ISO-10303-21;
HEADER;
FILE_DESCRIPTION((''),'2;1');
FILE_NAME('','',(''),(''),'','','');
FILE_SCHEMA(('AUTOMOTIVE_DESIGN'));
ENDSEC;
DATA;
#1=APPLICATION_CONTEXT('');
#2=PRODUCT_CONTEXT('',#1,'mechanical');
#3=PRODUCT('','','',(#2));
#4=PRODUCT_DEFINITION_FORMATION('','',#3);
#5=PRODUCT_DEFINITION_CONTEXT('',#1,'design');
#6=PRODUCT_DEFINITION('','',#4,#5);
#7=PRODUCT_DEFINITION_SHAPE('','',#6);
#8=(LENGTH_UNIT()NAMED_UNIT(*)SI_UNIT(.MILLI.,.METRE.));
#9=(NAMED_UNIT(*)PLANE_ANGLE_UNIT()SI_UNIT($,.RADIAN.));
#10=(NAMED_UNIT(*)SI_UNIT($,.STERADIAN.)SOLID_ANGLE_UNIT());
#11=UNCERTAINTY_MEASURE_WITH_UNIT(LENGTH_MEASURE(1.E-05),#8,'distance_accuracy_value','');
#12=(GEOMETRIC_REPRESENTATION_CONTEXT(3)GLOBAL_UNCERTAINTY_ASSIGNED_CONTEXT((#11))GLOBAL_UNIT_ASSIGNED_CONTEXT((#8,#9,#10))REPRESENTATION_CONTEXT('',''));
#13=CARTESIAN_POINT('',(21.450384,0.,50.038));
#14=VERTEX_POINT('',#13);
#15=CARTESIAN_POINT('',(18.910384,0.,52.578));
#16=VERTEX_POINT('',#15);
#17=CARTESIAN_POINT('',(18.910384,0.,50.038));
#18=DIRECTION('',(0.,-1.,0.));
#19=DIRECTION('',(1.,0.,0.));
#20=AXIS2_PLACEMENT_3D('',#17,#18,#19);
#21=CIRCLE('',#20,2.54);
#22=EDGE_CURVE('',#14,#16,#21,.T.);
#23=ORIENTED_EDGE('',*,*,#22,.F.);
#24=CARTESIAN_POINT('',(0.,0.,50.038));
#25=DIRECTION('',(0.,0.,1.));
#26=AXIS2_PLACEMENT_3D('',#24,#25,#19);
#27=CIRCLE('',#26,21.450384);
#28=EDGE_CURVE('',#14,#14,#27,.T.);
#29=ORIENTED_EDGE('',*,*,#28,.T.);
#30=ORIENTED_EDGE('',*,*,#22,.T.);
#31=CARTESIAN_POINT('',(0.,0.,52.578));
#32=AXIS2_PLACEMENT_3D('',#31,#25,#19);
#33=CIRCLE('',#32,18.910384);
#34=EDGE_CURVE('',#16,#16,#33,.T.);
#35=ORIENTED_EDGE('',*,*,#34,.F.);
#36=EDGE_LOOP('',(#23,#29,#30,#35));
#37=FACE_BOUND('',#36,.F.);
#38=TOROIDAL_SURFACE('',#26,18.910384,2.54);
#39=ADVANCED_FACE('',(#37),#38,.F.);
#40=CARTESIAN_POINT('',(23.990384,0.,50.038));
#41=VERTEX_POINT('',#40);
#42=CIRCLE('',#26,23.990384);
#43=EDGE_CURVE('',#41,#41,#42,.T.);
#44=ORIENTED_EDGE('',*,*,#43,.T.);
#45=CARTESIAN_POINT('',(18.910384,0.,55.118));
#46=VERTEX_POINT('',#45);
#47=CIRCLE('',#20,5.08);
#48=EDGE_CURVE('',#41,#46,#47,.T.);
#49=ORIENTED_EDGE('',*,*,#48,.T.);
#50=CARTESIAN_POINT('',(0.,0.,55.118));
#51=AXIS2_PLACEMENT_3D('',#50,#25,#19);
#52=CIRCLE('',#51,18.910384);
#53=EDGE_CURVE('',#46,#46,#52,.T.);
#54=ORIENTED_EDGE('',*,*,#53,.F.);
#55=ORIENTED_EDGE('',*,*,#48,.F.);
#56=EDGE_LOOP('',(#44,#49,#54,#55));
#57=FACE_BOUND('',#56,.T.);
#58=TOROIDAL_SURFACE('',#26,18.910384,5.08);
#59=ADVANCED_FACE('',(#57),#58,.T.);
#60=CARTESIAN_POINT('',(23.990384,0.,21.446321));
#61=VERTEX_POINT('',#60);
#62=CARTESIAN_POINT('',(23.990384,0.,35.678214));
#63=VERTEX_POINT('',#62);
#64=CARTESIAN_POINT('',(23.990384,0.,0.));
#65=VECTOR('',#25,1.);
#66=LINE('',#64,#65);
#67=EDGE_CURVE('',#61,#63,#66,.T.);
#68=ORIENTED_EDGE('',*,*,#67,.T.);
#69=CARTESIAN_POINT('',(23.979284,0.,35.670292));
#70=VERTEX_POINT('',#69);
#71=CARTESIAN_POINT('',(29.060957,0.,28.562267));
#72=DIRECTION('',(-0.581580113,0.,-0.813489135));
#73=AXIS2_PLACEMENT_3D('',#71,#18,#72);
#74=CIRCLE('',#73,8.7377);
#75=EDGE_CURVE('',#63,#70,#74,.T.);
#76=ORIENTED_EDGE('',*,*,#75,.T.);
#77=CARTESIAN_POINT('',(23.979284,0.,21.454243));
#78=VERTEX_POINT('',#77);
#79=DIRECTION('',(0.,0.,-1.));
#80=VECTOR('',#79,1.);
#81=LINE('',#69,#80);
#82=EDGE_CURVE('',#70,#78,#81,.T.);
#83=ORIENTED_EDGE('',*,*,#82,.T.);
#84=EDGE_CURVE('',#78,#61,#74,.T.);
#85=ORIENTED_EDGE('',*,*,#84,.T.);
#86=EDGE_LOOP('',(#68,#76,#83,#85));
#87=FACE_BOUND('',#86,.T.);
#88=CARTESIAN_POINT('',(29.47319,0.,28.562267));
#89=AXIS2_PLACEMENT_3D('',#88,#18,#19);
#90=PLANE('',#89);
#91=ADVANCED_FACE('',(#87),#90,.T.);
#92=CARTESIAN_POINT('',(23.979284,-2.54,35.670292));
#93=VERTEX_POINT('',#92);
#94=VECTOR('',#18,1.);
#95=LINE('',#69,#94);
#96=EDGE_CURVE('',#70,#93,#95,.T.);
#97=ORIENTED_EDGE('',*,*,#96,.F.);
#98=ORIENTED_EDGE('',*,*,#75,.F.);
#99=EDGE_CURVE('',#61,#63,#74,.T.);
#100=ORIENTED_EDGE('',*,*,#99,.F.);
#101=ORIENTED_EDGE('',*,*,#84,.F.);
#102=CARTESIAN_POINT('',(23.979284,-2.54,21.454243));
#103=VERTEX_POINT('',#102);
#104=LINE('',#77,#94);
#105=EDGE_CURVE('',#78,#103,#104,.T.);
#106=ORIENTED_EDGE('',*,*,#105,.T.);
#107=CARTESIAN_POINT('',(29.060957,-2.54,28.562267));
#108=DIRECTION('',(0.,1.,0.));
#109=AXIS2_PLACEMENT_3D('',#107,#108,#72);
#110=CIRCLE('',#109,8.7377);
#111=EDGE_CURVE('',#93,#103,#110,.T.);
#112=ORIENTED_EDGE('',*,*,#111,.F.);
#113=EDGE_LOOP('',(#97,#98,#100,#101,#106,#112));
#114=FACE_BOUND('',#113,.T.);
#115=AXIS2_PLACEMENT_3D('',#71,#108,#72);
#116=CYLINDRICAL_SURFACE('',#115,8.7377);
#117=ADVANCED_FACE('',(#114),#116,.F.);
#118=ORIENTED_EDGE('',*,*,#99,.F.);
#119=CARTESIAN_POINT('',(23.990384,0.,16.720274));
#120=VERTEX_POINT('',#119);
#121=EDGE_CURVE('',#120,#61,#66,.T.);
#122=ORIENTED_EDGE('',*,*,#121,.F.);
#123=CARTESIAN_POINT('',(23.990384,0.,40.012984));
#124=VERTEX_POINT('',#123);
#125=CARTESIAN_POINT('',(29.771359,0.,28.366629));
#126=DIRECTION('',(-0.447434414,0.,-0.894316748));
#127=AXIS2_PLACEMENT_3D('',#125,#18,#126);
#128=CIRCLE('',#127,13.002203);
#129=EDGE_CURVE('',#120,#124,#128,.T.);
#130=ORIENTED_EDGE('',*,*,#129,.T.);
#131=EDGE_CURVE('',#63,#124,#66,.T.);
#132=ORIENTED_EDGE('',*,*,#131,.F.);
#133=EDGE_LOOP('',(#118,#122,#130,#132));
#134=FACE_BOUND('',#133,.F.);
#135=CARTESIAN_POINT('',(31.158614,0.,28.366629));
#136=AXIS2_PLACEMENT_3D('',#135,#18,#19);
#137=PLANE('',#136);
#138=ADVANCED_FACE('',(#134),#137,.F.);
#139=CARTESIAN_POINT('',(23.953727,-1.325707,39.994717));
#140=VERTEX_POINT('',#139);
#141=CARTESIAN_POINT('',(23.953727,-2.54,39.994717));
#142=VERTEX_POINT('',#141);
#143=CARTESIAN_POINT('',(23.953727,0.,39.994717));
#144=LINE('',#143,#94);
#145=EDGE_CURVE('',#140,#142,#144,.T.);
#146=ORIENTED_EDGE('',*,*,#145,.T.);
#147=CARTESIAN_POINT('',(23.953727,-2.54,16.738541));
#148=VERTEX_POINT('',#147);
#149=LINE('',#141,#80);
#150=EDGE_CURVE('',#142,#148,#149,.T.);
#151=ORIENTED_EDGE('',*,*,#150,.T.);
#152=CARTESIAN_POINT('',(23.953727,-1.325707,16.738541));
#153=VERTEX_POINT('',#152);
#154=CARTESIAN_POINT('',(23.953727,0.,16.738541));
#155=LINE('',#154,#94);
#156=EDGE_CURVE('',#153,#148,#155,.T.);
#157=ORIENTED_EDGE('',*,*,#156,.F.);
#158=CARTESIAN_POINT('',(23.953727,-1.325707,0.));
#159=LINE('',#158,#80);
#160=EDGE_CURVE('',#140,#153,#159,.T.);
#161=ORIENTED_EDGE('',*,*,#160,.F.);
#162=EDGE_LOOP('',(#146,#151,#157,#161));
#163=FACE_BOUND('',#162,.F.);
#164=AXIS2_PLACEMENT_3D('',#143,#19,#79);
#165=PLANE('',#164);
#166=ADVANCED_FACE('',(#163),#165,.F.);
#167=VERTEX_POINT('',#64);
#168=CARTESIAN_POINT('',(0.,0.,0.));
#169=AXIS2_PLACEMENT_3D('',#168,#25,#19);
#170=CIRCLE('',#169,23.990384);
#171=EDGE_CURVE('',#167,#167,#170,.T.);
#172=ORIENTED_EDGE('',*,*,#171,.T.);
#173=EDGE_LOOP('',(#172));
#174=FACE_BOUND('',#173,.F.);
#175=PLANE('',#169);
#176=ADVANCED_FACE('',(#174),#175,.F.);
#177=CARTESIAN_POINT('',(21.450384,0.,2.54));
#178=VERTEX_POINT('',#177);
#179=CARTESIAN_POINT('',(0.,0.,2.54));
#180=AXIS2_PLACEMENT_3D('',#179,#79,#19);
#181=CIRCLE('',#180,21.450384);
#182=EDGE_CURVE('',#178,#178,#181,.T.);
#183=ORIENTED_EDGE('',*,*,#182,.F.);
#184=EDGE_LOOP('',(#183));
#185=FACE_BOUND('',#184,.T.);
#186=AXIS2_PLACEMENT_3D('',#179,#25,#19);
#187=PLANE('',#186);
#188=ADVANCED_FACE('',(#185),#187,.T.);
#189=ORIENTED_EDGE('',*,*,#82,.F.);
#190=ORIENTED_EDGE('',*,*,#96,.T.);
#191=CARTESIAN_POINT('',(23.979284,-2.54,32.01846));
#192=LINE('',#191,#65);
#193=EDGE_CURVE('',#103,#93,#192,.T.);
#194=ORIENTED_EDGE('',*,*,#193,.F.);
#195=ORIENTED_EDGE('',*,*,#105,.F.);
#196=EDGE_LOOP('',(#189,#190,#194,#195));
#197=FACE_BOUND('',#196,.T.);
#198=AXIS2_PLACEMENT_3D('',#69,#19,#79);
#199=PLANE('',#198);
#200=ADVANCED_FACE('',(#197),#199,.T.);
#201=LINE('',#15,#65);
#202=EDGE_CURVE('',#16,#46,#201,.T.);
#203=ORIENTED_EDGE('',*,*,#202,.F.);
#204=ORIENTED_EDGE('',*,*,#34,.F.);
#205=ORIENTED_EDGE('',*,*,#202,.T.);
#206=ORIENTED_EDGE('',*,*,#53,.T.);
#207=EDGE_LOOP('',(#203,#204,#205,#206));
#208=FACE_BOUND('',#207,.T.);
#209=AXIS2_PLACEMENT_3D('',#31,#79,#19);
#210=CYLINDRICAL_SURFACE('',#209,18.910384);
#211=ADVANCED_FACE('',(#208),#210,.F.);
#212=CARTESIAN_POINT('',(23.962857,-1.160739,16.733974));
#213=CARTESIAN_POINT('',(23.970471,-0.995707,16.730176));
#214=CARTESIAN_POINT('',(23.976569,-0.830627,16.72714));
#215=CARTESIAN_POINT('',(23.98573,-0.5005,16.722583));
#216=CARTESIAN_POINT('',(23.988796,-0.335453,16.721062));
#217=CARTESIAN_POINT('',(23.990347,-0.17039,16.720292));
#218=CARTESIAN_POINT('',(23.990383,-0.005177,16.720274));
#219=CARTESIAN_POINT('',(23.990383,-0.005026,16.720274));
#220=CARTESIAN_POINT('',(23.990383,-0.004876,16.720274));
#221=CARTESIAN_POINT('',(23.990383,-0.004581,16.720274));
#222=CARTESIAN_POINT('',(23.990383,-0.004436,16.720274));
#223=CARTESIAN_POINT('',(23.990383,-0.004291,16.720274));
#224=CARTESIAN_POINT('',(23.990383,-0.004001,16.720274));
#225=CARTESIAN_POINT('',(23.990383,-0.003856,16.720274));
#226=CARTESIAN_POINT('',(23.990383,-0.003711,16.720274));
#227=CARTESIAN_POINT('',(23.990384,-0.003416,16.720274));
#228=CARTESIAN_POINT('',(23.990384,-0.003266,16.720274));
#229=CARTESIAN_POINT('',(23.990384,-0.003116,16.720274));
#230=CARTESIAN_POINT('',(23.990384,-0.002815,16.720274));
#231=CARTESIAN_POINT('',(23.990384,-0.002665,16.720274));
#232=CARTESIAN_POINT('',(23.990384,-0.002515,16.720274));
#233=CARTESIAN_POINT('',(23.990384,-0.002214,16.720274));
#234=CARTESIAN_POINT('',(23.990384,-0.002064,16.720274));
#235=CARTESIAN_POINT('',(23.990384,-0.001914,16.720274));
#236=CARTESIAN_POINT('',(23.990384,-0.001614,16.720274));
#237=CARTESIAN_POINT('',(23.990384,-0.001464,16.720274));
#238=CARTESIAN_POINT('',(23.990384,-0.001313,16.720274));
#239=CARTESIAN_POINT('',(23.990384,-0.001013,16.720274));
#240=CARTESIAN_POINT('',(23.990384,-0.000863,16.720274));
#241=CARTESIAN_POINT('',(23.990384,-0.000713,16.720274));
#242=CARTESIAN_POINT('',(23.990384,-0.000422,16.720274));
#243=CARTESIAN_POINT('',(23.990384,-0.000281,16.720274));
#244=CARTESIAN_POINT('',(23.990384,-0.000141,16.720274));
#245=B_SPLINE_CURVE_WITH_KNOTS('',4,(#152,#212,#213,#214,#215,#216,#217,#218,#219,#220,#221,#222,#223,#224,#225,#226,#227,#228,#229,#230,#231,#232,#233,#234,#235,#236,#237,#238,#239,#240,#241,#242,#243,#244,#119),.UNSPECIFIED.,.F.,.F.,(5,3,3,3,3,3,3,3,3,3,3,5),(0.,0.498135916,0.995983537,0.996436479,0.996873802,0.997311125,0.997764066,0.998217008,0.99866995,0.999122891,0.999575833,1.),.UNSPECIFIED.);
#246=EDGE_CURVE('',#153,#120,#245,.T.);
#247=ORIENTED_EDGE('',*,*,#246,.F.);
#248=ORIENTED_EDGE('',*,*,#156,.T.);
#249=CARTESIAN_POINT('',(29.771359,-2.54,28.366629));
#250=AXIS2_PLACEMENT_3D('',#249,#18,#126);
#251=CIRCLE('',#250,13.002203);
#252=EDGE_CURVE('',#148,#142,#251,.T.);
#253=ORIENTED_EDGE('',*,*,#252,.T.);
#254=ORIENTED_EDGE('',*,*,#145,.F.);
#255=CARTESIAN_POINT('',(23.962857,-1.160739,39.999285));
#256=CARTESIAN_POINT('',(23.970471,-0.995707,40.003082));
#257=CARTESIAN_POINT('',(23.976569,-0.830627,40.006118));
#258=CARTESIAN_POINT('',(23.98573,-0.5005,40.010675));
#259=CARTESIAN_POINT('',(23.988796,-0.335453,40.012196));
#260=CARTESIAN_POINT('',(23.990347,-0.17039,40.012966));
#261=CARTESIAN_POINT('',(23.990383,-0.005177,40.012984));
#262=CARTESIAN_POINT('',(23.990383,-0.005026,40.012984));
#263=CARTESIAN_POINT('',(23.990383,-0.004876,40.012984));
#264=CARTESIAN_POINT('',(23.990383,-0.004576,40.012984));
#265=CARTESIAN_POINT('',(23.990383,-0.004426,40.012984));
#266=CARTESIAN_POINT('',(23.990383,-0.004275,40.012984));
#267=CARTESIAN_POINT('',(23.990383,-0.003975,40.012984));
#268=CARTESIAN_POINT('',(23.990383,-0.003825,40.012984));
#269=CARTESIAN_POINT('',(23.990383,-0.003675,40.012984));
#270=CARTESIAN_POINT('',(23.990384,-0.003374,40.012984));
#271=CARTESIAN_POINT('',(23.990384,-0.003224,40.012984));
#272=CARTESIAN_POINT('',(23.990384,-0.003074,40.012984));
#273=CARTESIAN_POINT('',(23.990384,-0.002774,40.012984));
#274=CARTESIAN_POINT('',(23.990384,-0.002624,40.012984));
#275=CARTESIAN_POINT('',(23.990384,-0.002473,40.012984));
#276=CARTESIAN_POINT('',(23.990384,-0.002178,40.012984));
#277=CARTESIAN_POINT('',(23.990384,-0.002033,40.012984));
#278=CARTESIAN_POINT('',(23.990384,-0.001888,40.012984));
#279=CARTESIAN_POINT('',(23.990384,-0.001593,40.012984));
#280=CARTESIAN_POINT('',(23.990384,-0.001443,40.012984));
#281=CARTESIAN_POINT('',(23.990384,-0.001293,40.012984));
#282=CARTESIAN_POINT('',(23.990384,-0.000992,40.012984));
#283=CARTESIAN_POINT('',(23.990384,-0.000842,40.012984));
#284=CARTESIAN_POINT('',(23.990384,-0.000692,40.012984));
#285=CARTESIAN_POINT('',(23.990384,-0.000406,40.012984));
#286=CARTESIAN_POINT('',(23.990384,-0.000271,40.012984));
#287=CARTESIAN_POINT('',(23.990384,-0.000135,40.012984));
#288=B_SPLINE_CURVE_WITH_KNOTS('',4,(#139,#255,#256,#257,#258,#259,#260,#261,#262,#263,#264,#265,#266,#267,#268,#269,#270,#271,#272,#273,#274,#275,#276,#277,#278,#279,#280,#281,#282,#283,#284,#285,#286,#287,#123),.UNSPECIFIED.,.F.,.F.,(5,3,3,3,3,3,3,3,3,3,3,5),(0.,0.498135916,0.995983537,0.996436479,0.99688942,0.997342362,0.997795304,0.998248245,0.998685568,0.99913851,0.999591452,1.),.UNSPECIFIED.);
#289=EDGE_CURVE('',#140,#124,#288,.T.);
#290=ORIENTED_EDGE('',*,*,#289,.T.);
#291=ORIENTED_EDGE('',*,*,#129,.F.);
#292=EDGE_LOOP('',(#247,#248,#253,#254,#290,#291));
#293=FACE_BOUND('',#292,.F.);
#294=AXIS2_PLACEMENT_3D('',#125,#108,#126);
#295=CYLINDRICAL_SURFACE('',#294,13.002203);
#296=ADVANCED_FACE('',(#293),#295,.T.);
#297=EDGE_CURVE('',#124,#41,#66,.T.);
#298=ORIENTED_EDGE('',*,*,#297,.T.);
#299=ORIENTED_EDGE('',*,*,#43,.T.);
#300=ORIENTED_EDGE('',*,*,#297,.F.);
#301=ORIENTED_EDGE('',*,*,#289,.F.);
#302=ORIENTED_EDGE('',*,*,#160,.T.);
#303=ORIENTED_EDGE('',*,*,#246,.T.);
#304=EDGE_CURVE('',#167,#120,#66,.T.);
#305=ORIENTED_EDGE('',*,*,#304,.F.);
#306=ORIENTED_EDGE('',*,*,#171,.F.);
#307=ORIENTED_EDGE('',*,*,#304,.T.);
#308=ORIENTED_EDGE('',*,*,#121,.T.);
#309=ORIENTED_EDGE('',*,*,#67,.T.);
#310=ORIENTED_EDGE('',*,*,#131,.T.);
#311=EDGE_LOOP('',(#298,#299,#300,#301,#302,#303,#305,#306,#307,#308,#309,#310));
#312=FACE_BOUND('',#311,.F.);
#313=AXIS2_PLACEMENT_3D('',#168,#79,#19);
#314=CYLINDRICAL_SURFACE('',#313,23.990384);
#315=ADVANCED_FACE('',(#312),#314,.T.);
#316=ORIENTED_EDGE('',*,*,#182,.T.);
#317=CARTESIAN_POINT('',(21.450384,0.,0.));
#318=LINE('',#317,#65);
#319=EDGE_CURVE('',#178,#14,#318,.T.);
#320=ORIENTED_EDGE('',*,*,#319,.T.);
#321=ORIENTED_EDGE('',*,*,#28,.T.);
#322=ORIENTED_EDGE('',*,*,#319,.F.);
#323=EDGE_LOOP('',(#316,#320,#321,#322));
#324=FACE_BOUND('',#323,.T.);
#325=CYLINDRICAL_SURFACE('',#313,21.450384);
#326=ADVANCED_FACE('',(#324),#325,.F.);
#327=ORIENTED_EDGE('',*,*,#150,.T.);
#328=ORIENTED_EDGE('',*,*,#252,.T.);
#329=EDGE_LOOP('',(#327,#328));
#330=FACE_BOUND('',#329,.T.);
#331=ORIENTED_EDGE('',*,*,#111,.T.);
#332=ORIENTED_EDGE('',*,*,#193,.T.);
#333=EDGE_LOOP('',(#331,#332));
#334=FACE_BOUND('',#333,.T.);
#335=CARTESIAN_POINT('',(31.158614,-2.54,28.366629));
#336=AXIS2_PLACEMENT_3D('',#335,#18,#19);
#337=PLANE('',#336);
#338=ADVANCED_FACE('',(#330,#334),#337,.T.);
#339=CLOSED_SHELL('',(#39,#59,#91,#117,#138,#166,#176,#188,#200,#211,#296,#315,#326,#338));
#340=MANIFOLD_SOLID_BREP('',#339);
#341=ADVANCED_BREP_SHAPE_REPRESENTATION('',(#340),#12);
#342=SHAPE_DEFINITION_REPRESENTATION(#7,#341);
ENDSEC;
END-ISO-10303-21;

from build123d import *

# Parameters (mm, degrees)
F0_R     = 23.9903837703
F1_DEPTH = 55.118
F2_R     = 5.08
F3_T     = -2.54
F5_DEPTH = 2.54
F7_DEPTH = 4.1402


# Not quite as in the source:
# - a shell that OpenCascade refuses in one call is made with other operations: the cavity is built on its own and cut out


with BuildPart() as f1:
    # F0 (on Top) → F1 (new body)
    with BuildSketch(Plane.XY):
        Circle(F0_R)
    extrude(amount=F1_DEPTH)

    # F2
    f2_edges = [f1.edges().sort_by_distance(p)[0] for p in [
        (-23.990384, 0, 55.118),
    ]]
    fillet(f2_edges, radius=F2_R)

    # F3: a shell. OpenCascade refuses it in one call, so the cavity is built on its own and cut out:
    # the body offset inwards by the wall thickness, plus a prism from it out through each open face.
    f3_core = offset(f1.part, amount=F3_T, mode=Mode.PRIVATE)
    f3_exits = [f3_core.faces().sort_by_distance(p)[0] for p in [
        (0, 0, 52.578),
    ]]
    add(f3_core, mode=Mode.SUBTRACT)
    extrude(f3_exits, amount=-F3_T, mode=Mode.SUBTRACT)

    # F4 (on Front) → F5 (join)
    with BuildSketch(Plane.XZ):
        with BuildLine():
            ThreePointArc((23.9537265152, 16.7385414243), (42.7735621339, 28.3666290343), (23.9537265152, 39.9947166443))
            Line((23.9537265152, 39.9947166443), (23.9537265152, 16.7385414243))
        make_face()
    extrude(amount=F5_DEPTH)

    # F6 (on Front) → F7 (cut)
    with BuildSketch(Plane.XZ):
        with BuildLine():
            ThreePointArc((23.9792838693, 21.4542429894), (37.798657028, 28.5622673109), (23.9792838693, 35.6702916324))
            Line((23.9792838693, 35.6702916324), (23.9792838693, 21.4542429894))
        make_face()
    extrude(amount=F7_DEPTH, mode=Mode.SUBTRACT)


solid = f1.part
